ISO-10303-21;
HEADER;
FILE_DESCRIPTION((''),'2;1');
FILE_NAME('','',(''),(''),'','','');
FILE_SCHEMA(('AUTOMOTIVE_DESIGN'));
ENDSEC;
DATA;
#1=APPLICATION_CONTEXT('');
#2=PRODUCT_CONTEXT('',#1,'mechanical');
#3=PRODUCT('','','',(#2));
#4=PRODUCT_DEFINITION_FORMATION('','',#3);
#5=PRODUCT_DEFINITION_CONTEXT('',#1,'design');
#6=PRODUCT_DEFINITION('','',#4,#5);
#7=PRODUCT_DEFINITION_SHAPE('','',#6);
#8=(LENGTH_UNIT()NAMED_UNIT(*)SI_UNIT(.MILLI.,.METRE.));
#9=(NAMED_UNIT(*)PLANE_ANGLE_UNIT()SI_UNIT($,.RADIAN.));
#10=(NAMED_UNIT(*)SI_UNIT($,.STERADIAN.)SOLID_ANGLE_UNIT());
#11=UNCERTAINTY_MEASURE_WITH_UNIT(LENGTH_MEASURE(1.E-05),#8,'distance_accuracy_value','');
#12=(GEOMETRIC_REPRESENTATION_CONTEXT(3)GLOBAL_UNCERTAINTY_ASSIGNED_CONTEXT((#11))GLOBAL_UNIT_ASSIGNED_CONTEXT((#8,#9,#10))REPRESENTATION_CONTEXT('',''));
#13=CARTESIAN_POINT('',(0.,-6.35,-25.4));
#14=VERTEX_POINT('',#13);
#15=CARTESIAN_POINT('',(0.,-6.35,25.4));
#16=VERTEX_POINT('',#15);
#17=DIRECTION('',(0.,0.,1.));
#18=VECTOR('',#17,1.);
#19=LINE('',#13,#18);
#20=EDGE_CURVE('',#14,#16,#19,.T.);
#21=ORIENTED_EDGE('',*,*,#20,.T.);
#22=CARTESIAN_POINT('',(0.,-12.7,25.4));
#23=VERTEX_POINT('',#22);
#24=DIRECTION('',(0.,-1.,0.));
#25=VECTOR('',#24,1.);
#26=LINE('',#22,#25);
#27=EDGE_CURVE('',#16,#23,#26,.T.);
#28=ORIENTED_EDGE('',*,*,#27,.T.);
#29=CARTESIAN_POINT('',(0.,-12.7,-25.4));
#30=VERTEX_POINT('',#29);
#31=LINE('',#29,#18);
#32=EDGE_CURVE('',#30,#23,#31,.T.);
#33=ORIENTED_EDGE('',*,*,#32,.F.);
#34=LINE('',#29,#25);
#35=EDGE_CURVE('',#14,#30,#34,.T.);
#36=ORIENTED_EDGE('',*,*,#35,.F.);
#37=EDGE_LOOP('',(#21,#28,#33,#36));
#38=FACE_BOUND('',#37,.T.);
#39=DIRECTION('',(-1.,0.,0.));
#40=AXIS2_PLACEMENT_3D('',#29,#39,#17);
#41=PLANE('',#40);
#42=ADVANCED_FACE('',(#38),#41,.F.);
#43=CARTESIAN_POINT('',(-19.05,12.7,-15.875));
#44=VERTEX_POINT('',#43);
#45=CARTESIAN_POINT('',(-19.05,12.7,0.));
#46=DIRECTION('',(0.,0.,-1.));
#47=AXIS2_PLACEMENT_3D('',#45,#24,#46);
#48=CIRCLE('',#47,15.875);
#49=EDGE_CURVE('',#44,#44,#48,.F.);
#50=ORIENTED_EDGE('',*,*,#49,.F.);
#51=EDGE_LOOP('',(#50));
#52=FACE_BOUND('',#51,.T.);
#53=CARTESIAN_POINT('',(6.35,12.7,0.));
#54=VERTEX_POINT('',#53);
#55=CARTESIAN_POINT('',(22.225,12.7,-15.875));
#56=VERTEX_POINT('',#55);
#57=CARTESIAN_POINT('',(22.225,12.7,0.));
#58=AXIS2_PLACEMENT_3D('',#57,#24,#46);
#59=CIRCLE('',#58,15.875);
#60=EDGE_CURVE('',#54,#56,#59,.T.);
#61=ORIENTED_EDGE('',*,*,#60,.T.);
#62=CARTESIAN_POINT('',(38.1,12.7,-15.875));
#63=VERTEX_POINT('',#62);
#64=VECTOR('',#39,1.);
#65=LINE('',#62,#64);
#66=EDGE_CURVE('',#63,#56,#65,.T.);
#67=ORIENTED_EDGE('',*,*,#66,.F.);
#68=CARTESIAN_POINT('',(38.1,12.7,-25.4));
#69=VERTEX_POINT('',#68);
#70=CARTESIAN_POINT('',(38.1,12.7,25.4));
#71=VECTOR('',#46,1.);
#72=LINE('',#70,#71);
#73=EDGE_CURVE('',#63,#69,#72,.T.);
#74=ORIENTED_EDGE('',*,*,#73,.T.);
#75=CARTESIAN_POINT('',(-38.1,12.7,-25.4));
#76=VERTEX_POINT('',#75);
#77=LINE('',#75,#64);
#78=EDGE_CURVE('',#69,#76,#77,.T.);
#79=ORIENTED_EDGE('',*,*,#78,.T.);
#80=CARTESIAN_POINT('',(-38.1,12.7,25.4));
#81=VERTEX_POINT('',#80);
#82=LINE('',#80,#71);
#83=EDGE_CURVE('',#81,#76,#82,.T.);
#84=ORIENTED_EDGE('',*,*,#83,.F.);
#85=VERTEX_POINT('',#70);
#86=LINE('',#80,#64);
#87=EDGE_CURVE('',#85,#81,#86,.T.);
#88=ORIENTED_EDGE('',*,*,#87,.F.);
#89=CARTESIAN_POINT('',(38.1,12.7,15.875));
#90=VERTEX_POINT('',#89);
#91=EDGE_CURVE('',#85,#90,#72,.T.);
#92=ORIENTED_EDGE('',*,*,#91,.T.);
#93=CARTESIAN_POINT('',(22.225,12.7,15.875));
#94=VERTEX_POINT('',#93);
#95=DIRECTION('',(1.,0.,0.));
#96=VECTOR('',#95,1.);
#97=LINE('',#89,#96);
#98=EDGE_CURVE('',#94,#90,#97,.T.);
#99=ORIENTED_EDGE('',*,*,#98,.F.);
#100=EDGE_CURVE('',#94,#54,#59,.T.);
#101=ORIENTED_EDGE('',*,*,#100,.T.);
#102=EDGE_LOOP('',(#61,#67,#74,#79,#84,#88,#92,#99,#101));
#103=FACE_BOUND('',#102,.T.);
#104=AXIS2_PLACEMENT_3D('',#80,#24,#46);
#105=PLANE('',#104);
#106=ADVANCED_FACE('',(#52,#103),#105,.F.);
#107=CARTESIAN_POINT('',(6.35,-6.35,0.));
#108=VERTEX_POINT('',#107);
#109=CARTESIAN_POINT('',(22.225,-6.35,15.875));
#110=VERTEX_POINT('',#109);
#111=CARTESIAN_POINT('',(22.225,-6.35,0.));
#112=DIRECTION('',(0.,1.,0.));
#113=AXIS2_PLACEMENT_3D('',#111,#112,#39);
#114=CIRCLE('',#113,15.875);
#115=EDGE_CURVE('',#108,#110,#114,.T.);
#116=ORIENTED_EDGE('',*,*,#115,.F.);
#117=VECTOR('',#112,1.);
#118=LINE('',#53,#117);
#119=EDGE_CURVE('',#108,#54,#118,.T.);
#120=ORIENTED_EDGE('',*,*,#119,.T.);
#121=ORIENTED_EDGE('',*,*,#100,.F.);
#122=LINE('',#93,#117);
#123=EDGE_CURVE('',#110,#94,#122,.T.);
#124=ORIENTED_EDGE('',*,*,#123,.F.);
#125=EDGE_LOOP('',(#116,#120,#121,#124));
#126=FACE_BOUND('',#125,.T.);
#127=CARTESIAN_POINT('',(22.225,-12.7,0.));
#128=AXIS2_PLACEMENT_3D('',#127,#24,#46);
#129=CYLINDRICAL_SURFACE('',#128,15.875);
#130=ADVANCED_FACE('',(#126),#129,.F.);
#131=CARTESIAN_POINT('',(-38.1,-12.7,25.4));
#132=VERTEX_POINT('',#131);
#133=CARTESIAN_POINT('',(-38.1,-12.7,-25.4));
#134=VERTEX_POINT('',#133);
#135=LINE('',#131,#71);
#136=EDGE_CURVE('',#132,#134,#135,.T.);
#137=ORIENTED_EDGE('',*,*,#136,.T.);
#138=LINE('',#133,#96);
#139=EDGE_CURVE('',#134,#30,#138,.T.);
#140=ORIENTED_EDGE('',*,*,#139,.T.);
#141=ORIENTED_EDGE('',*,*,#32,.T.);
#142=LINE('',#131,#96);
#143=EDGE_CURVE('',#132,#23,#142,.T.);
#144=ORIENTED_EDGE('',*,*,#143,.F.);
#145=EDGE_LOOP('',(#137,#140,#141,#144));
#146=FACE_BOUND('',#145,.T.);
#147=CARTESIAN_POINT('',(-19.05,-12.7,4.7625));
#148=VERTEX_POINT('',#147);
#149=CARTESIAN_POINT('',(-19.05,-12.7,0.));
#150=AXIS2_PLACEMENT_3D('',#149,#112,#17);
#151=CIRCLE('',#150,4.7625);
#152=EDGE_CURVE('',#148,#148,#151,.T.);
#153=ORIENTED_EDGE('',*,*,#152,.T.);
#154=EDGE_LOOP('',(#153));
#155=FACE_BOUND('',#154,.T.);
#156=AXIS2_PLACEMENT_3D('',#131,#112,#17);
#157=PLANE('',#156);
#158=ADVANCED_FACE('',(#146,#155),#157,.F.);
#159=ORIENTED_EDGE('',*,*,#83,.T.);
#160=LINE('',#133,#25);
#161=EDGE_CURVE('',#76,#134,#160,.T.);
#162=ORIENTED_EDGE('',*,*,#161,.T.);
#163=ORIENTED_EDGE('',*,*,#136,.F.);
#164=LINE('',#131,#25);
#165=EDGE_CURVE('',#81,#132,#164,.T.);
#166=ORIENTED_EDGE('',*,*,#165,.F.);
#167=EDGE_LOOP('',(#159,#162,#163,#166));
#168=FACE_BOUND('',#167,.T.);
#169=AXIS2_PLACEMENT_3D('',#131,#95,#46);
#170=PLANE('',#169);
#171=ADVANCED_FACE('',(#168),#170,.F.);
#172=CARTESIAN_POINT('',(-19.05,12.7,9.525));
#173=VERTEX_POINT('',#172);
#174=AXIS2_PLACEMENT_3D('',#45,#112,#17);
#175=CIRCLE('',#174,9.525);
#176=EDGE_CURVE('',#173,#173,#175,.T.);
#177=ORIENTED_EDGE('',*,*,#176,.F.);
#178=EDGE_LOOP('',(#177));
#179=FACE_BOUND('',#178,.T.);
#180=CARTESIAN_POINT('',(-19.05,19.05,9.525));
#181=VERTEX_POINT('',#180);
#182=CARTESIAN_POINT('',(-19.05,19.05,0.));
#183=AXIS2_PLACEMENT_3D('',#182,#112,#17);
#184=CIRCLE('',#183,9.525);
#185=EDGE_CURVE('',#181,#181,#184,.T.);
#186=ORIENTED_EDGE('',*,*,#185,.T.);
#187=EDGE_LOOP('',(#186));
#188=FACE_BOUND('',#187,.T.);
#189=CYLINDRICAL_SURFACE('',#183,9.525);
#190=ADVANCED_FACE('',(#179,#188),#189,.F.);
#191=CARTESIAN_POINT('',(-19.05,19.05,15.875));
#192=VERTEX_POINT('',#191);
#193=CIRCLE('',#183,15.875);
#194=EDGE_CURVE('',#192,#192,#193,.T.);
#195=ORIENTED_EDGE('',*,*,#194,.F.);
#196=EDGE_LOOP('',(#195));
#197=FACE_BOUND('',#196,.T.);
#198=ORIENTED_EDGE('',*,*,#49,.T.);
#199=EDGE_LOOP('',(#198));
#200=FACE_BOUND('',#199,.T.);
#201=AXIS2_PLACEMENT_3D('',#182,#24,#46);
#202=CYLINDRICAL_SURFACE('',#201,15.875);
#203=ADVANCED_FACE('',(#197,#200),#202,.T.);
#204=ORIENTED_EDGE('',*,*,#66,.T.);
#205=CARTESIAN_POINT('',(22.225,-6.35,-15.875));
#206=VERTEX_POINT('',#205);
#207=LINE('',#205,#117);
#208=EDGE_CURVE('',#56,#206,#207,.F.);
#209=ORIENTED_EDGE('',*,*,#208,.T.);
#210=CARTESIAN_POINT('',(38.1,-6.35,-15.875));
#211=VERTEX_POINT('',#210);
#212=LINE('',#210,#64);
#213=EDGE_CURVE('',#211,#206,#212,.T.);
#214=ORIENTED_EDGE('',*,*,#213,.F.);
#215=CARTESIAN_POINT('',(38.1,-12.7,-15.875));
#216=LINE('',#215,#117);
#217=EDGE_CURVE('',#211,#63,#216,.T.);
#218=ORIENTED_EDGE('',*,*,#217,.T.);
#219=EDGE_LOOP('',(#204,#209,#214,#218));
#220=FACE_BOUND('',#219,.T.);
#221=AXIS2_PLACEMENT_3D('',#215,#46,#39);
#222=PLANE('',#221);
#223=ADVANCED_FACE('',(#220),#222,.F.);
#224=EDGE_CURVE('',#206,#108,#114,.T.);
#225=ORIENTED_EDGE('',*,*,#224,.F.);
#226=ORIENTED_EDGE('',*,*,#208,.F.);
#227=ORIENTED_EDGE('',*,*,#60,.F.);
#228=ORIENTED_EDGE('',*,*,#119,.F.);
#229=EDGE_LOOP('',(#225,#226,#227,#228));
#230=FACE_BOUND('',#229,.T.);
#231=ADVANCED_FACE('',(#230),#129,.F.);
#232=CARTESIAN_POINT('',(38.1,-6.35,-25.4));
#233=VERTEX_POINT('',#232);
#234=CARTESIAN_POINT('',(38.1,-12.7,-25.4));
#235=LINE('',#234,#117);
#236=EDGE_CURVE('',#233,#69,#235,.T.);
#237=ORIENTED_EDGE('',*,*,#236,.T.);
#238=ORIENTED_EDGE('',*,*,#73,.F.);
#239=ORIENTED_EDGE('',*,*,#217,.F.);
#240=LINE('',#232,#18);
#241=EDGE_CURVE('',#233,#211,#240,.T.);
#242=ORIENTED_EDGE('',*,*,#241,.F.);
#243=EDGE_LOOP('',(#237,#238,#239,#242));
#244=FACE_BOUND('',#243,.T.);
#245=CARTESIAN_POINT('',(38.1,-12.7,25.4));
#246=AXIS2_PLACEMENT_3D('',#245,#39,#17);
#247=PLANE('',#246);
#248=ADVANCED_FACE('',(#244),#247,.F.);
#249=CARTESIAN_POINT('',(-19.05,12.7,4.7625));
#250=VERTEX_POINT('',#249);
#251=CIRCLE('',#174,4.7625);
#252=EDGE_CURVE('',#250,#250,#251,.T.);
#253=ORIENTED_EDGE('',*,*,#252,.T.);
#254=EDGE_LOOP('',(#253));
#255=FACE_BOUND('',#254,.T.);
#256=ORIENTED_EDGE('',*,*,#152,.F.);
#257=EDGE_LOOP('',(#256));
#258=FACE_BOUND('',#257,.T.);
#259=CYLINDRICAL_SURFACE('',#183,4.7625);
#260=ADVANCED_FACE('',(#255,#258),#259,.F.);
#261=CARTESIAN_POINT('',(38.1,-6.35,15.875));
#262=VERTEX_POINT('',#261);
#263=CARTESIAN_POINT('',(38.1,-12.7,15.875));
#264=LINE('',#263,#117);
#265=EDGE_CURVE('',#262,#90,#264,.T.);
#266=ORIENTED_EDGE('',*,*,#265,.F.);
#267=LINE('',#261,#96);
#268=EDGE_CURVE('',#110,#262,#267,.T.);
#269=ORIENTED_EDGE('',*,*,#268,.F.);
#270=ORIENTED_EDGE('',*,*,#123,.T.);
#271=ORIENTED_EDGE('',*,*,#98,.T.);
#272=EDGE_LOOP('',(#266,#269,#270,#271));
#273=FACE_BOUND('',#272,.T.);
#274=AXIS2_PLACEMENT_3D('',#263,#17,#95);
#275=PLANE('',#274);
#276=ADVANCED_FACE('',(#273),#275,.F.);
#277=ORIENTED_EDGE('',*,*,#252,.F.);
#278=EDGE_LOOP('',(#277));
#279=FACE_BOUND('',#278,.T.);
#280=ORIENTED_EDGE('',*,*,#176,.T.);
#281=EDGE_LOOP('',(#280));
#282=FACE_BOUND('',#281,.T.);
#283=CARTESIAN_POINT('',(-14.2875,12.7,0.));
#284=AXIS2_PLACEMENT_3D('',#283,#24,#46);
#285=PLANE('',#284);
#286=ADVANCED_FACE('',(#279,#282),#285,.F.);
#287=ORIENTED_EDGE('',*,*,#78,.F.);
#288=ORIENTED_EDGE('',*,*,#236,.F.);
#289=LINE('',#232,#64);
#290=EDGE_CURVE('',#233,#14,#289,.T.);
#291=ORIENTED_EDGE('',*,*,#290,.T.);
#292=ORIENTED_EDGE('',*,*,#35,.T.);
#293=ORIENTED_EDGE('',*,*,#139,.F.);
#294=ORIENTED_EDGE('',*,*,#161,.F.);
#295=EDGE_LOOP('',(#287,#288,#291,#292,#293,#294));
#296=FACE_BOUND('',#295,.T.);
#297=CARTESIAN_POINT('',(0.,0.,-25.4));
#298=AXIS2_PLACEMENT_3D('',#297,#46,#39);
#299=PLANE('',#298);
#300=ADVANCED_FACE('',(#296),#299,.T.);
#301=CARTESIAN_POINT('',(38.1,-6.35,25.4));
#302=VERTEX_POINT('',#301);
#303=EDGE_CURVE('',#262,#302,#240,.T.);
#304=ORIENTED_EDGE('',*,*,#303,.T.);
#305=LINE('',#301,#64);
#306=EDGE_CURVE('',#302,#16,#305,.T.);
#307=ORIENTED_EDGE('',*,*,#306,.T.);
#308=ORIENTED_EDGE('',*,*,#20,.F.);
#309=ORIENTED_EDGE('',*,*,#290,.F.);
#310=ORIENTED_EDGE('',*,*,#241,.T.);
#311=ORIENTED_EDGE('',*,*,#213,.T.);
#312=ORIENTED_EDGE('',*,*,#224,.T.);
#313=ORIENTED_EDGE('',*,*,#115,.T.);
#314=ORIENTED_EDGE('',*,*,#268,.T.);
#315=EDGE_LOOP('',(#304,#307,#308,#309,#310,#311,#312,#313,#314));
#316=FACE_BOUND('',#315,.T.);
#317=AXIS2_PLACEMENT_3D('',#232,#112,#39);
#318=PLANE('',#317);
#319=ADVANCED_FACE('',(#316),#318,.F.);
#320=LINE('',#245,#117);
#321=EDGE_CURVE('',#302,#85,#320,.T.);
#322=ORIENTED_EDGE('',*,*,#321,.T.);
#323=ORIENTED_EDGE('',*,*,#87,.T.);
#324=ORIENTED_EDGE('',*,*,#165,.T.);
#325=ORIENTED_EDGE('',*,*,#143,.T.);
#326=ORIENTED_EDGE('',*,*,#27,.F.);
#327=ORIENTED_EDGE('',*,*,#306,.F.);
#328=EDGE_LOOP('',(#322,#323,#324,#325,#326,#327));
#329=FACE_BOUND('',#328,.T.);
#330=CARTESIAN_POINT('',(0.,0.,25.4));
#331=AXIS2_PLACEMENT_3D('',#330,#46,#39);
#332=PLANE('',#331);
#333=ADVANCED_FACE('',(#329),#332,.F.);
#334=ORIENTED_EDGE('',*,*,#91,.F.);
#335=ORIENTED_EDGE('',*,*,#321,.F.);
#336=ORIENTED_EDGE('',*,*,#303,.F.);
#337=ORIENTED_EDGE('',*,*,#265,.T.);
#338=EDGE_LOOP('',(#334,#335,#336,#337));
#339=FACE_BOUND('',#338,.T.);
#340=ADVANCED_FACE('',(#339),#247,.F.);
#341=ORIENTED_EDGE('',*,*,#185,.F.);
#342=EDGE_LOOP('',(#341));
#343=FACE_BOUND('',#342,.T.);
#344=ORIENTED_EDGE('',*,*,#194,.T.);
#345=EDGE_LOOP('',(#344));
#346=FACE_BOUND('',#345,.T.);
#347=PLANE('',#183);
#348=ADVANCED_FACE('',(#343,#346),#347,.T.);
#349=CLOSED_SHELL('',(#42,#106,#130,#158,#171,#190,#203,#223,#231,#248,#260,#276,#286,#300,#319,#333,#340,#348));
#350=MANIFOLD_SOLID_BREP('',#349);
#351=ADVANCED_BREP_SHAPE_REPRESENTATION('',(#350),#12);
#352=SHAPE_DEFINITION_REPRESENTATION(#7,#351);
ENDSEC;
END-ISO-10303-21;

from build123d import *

# Parameters (mm, degrees)
SKETCH2_W               = 76.2
SKETCH2_H               = 25.4
BOSS_EXTRUDE1_DEPTH     = 25.4
SKETCH3_W               = 38.1
SKETCH3_H               = 6.35
CUT_EXTRUDE1_DEPTH      = 65.757547823
CUT_EXTRUDE2_DEPTH      = 48.519048812
CUT_EXTRUDE2_DEPTH_BACK = 48.519048812
SKETCH4_W               = 31.75
SKETCH4_H               = 31.75
FILLET2_R               = 15.875
SKETCH5_R               = 15.875
BOSS_EXTRUDE2_DEPTH     = 6.35
HOLE1_D                 = 9.525
HOLE1_DEPTH             = 31.75
HOLE1_CBORE_D           = 19.05
HOLE1_CBORE_DEPTH       = 6.35
HOLE1_TIP               = 2.861598698


with BuildPart() as part:
    # Sketch2 → Boss-Extrude1 (new, symmetric)
    with BuildSketch(Plane.XY):
        Rectangle(SKETCH2_W, SKETCH2_H)
    extrude(amount=BOSS_EXTRUDE1_DEPTH, both=True)

    # Sketch3 → Cut-Extrude1 (cut, through all)
    with BuildSketch(Plane.XY.offset(25.4)):
        with Locations((19.05, -9.525)):
            Rectangle(SKETCH3_W, SKETCH3_H)
    extrude(amount=-CUT_EXTRUDE1_DEPTH, mode=Mode.SUBTRACT)

    # Sketch4 → Cut-Extrude2 (cut, two sides: drawn at the far end of the back side and taken through both)
    with BuildSketch(Plane(origin=(0, 0, 0), x_dir=(1, 0, 0), z_dir=(0, 1, 0)).offset(-CUT_EXTRUDE2_DEPTH_BACK)):
        with Locations((22.225, 0)):
            Rectangle(SKETCH4_W, SKETCH4_H)
    extrude(amount=CUT_EXTRUDE2_DEPTH + CUT_EXTRUDE2_DEPTH_BACK, mode=Mode.SUBTRACT)

    # Fillet2
    fillet2_edges = [part.edges().sort_by_distance(p)[0] for p in [
        (6.35, 3.175, 15.875),
        (6.35, 3.175, -15.875),
    ]]
    fillet(fillet2_edges, radius=FILLET2_R - 0.0001)  # a hair under: the kernel refuses the full size

    # Sketch5 → Boss-Extrude2 (add)
    with BuildSketch(Plane(origin=(0, 12.7, 0), x_dir=(1, 0, 0), z_dir=(0, 1, 0))):
        with Locations(Location((-19.05, 0, 0), (0, 0, 90))):
            Circle(SKETCH5_R)
    extrude(amount=BOSS_EXTRUDE2_DEPTH)

    # Hole1
    with Locations(Plane(origin=(-19.05, 19.05, 0), x_dir=(0, 0, 1), z_dir=(0, 1, 0))):
        with Locations((0, 0)):
            CounterBoreHole(HOLE1_D / 2, HOLE1_CBORE_D / 2, HOLE1_CBORE_DEPTH, depth=HOLE1_DEPTH)
            with Locations((0, 0, -(HOLE1_DEPTH + HOLE1_TIP / 2))):  # 118° drill point
                Cone(0, HOLE1_D / 2, HOLE1_TIP, mode=Mode.SUBTRACT)


solid = part.part
